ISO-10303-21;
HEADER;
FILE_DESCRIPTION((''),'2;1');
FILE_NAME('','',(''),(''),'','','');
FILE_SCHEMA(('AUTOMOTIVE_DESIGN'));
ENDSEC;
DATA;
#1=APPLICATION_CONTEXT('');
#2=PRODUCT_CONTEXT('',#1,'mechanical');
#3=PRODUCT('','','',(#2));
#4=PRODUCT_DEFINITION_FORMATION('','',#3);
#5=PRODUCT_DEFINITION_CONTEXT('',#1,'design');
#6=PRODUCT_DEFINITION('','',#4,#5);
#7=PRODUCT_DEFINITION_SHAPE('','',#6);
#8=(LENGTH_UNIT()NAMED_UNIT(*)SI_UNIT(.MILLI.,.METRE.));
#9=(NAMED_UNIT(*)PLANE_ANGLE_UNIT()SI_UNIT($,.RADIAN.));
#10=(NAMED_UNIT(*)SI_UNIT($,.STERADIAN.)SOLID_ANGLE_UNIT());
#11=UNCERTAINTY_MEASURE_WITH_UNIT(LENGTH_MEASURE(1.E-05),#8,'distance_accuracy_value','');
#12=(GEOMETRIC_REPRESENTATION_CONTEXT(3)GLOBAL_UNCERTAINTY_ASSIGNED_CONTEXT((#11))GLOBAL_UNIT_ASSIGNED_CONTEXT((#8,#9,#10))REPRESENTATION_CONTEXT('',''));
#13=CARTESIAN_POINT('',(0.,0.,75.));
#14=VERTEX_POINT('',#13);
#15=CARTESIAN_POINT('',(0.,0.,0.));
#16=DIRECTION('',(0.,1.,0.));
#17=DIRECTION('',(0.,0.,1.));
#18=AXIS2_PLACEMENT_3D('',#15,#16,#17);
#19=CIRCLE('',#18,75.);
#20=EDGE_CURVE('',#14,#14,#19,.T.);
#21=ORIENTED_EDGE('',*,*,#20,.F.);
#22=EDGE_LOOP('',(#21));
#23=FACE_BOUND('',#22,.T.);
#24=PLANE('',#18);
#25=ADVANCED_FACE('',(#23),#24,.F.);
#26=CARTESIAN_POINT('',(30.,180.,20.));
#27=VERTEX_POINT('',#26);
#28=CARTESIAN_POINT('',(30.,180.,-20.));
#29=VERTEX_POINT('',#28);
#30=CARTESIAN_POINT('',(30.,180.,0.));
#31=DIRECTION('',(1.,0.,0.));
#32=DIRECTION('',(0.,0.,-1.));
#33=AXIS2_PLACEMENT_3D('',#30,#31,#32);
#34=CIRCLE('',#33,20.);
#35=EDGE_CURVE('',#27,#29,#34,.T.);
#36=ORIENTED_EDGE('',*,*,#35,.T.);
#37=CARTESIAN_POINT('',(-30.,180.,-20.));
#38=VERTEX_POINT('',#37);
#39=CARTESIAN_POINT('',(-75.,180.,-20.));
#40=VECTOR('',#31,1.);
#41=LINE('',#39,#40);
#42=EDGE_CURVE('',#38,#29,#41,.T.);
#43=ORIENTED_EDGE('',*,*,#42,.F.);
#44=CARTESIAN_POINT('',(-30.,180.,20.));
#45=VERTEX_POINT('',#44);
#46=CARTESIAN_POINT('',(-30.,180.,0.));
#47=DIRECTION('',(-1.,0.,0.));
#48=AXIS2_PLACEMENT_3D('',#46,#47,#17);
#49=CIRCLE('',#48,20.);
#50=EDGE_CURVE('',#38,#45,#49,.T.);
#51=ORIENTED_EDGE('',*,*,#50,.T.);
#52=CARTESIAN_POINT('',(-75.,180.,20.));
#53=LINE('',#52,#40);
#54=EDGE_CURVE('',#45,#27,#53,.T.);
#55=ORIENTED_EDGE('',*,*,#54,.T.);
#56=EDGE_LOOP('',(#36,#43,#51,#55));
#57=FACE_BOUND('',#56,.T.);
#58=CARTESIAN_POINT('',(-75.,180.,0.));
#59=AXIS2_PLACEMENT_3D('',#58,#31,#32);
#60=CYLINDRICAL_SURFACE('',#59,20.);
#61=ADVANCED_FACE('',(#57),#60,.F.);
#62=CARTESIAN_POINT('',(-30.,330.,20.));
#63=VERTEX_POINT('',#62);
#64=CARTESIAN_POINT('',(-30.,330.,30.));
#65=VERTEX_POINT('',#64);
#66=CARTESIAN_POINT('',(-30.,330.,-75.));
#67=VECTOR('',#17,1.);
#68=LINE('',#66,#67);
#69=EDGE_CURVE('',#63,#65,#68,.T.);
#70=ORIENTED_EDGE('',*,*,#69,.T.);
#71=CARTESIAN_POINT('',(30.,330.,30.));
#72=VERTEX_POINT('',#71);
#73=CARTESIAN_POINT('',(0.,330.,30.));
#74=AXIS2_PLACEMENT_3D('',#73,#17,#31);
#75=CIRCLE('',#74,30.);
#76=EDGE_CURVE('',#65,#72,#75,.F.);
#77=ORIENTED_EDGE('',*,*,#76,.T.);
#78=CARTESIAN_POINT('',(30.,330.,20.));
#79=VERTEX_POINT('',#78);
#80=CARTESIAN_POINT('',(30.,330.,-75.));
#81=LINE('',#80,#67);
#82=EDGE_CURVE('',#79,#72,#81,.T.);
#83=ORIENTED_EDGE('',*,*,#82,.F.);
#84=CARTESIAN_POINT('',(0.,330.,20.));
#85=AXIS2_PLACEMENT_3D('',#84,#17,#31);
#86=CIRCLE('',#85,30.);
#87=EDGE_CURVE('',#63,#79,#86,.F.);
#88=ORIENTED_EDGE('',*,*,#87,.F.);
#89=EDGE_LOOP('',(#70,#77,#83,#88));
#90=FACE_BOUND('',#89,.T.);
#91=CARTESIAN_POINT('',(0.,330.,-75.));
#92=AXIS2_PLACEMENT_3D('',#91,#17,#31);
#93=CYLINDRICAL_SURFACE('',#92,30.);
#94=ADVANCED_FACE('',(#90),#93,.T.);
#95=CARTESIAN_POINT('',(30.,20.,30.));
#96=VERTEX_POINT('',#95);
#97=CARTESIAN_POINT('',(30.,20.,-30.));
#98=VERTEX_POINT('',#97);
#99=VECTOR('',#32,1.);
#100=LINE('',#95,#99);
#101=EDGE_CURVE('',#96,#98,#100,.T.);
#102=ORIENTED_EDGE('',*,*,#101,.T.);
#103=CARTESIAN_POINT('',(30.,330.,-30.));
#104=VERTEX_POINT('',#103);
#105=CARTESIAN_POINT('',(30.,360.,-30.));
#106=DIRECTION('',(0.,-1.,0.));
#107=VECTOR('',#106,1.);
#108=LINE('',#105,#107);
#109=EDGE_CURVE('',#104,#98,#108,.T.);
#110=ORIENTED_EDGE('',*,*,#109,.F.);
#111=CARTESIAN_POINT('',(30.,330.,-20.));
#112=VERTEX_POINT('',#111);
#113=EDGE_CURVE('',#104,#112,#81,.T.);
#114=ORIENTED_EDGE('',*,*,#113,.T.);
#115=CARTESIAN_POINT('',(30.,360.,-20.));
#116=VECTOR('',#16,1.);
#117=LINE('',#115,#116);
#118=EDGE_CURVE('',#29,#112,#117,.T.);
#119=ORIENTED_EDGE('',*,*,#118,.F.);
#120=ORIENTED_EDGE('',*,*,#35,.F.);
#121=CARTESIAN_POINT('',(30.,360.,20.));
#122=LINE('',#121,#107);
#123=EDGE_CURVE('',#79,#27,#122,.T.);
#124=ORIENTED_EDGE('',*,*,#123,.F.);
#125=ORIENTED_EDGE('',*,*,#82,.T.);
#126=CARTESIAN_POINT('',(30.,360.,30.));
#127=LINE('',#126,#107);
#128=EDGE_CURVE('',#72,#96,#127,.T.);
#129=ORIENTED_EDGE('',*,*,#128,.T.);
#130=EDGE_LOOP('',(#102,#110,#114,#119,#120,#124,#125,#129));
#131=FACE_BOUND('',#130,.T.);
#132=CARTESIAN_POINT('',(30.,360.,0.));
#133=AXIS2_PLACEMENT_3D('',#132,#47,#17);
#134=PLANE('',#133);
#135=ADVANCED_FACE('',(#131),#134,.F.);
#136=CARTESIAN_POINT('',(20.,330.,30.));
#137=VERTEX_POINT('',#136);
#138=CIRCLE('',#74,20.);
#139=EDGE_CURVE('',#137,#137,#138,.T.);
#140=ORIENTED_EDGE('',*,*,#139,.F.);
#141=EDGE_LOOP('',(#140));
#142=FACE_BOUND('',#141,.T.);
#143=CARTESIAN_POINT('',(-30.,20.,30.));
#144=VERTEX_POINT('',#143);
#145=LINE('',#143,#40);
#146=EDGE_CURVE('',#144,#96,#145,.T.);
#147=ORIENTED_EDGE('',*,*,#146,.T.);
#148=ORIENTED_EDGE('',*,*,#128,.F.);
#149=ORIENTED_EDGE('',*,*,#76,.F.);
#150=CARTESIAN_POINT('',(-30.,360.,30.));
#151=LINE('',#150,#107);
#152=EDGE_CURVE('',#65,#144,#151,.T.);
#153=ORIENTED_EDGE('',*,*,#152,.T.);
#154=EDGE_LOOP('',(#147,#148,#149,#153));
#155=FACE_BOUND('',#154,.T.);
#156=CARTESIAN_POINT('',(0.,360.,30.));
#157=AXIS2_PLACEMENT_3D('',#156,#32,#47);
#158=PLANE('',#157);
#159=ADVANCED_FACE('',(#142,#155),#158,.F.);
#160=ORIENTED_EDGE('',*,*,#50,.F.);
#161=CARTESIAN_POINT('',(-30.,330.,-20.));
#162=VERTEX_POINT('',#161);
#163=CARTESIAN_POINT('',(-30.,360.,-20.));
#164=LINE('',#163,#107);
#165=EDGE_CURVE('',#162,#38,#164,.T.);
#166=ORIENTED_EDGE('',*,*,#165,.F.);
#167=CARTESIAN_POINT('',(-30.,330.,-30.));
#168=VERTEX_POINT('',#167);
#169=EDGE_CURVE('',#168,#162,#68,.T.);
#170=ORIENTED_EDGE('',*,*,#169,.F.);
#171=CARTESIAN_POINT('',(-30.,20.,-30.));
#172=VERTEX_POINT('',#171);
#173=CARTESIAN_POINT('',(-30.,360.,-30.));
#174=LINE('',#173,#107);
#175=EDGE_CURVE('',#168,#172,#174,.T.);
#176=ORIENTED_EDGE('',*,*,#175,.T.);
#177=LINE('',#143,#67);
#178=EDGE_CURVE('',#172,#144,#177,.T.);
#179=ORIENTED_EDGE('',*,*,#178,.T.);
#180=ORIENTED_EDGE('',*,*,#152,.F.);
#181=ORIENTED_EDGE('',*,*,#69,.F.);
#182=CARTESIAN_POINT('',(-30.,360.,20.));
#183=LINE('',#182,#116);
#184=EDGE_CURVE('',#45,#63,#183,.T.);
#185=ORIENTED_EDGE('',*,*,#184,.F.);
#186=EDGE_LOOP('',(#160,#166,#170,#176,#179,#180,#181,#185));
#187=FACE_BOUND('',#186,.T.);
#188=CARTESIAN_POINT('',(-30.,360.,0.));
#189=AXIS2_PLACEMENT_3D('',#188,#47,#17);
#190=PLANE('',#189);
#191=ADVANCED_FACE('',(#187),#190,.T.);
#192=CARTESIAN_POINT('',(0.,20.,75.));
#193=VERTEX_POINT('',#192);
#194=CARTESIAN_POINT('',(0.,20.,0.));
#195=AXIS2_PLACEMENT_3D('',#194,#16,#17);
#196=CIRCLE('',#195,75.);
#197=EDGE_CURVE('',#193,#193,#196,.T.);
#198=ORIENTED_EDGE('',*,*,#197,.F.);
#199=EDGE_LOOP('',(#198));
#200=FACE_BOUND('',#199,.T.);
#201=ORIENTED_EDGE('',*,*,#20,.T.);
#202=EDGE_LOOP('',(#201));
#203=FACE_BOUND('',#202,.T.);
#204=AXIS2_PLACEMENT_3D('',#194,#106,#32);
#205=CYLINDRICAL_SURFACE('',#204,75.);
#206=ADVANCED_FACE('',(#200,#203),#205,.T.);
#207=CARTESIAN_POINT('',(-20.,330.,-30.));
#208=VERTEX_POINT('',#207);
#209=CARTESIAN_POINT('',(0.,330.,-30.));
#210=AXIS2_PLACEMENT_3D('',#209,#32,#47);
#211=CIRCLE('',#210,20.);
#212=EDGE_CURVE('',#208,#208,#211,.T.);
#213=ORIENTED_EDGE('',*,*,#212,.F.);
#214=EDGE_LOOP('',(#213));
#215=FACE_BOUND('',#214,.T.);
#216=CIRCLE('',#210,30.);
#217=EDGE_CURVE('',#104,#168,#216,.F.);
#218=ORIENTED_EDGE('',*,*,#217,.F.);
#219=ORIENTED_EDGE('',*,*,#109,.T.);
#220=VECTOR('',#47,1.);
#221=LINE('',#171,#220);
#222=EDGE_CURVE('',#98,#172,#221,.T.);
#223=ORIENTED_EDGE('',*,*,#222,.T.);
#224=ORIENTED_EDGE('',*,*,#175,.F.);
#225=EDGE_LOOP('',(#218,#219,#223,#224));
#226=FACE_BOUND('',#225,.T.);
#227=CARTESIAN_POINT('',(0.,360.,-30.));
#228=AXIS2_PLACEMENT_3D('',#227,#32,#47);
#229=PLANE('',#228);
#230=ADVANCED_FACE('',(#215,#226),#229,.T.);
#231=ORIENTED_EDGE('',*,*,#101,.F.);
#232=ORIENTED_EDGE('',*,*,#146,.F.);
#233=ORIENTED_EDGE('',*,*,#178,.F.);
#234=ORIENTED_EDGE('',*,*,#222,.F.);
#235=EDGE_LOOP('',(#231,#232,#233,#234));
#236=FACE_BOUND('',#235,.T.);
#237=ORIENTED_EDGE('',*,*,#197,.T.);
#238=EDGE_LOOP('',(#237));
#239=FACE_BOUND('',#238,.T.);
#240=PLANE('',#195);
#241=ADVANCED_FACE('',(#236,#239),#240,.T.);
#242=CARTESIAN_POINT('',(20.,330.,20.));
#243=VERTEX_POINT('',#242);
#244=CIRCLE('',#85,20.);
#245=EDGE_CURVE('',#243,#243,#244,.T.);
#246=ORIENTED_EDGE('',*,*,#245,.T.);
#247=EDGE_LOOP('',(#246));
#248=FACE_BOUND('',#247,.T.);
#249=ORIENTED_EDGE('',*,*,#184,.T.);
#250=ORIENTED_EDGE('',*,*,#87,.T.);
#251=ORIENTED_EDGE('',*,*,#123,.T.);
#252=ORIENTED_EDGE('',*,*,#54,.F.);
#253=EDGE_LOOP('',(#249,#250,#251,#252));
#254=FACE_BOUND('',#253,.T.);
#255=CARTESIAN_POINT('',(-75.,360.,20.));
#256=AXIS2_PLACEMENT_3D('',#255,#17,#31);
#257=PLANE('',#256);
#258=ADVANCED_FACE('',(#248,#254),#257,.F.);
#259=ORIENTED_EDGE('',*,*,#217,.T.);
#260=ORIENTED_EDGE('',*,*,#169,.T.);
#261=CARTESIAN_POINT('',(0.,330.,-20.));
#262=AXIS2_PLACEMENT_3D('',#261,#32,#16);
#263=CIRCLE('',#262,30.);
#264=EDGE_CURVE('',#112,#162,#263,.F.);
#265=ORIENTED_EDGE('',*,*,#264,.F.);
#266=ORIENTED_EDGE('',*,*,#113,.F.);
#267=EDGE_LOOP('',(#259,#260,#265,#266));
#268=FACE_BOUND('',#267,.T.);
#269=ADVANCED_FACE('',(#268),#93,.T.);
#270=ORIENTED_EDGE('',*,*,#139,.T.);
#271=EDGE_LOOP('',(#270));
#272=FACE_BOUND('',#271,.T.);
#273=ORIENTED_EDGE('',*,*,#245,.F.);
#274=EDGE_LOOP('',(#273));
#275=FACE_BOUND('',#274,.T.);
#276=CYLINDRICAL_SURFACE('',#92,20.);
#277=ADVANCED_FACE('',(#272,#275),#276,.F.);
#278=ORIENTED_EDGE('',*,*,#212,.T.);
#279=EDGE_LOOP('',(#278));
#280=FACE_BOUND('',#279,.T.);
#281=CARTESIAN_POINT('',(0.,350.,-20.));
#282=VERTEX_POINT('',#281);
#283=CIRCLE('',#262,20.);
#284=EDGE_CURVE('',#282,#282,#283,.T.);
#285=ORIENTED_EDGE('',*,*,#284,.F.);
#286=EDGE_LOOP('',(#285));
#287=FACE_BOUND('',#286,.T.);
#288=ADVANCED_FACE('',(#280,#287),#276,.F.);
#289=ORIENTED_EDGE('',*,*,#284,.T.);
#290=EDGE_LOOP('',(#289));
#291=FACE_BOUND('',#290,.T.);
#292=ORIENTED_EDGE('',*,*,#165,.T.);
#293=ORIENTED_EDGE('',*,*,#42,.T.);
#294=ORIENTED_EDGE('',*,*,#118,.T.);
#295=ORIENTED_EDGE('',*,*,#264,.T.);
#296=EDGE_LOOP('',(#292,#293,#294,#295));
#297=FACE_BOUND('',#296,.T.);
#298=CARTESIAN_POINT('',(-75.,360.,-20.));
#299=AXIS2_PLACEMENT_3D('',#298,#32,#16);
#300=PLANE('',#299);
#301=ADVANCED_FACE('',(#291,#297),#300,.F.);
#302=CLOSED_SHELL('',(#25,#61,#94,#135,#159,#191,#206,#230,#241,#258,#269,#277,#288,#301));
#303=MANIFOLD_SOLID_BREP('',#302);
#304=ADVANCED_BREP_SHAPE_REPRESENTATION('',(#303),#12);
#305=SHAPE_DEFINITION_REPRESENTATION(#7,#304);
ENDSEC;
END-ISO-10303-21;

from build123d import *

# Parameters (mm, degrees)
SKETCH1_R           = 75
SKETCH1_W           = 60
SKETCH1_H           = 60
BOSS_EXTRUDE1_DEPTH = 20
SKETCH1_2_W         = 60
SKETCH1_2_H         = 60
BOSS_EXTRUDE2_DEPTH = 360
CUT_EXTRUDE1_DEPTH  = 383.426463519
SKETCH3_R           = 20
CUT_EXTRUDE2_DEPTH  = 383.426463519


with BuildPart() as part:
    # Sketch1 → Boss-Extrude1 (new body)
    with BuildSketch(Plane(origin=(0, 0, 0), x_dir=(1, 0, 0), z_dir=(0, 1, 0))):
        Circle(SKETCH1_R)
        Rectangle(SKETCH1_W, SKETCH1_H, mode=Mode.SUBTRACT)
    extrude(amount=BOSS_EXTRUDE1_DEPTH)

    # Sketch1<2> → Boss-Extrude2 (add)
    with BuildSketch(Plane(origin=(0, 0, 0), x_dir=(1, 0, 0), z_dir=(0, 1, 0))):
        Rectangle(SKETCH1_2_W, SKETCH1_2_H)
    extrude(amount=BOSS_EXTRUDE2_DEPTH)

    # Sketch2 → Cut-Extrude1 (cut, through all)
    with BuildSketch(Plane(origin=(30, 0, 0), x_dir=(0, 0, -1), z_dir=(1, 0, 0))):
        with BuildLine():
            Line((-20, 360), (20, 360))
            Line((20, 360), (20, 180))
            ThreePointArc((20, 180), (0, 160), (-20, 180))
            Line((-20, 180), (-20, 360))
        make_face()
    extrude(amount=-CUT_EXTRUDE1_DEPTH, mode=Mode.SUBTRACT)

    # Sketch3 → Cut-Extrude2 (cut, through all)
    with BuildSketch(Plane.XY.offset(30)):
        with BuildLine():
            Line((-30, 360), (-30, 330))
            ThreePointArc((-30, 330), (-21.21320334, 351.213203531), (2.71e-07, 360))
            Line((2.71e-07, 360), (-30, 360))
        make_face()
        with BuildLine():
            ThreePointArc((2.71e-07, 360), (21.213203531, 351.21320334), (30, 330))
            Line((30, 330), (30, 360))
            Line((30, 360), (2.71e-07, 360))
        make_face()
        with Locations((0, 330)):
            Circle(SKETCH3_R)
    extrude(amount=-CUT_EXTRUDE2_DEPTH, mode=Mode.SUBTRACT)


solid = part.part
